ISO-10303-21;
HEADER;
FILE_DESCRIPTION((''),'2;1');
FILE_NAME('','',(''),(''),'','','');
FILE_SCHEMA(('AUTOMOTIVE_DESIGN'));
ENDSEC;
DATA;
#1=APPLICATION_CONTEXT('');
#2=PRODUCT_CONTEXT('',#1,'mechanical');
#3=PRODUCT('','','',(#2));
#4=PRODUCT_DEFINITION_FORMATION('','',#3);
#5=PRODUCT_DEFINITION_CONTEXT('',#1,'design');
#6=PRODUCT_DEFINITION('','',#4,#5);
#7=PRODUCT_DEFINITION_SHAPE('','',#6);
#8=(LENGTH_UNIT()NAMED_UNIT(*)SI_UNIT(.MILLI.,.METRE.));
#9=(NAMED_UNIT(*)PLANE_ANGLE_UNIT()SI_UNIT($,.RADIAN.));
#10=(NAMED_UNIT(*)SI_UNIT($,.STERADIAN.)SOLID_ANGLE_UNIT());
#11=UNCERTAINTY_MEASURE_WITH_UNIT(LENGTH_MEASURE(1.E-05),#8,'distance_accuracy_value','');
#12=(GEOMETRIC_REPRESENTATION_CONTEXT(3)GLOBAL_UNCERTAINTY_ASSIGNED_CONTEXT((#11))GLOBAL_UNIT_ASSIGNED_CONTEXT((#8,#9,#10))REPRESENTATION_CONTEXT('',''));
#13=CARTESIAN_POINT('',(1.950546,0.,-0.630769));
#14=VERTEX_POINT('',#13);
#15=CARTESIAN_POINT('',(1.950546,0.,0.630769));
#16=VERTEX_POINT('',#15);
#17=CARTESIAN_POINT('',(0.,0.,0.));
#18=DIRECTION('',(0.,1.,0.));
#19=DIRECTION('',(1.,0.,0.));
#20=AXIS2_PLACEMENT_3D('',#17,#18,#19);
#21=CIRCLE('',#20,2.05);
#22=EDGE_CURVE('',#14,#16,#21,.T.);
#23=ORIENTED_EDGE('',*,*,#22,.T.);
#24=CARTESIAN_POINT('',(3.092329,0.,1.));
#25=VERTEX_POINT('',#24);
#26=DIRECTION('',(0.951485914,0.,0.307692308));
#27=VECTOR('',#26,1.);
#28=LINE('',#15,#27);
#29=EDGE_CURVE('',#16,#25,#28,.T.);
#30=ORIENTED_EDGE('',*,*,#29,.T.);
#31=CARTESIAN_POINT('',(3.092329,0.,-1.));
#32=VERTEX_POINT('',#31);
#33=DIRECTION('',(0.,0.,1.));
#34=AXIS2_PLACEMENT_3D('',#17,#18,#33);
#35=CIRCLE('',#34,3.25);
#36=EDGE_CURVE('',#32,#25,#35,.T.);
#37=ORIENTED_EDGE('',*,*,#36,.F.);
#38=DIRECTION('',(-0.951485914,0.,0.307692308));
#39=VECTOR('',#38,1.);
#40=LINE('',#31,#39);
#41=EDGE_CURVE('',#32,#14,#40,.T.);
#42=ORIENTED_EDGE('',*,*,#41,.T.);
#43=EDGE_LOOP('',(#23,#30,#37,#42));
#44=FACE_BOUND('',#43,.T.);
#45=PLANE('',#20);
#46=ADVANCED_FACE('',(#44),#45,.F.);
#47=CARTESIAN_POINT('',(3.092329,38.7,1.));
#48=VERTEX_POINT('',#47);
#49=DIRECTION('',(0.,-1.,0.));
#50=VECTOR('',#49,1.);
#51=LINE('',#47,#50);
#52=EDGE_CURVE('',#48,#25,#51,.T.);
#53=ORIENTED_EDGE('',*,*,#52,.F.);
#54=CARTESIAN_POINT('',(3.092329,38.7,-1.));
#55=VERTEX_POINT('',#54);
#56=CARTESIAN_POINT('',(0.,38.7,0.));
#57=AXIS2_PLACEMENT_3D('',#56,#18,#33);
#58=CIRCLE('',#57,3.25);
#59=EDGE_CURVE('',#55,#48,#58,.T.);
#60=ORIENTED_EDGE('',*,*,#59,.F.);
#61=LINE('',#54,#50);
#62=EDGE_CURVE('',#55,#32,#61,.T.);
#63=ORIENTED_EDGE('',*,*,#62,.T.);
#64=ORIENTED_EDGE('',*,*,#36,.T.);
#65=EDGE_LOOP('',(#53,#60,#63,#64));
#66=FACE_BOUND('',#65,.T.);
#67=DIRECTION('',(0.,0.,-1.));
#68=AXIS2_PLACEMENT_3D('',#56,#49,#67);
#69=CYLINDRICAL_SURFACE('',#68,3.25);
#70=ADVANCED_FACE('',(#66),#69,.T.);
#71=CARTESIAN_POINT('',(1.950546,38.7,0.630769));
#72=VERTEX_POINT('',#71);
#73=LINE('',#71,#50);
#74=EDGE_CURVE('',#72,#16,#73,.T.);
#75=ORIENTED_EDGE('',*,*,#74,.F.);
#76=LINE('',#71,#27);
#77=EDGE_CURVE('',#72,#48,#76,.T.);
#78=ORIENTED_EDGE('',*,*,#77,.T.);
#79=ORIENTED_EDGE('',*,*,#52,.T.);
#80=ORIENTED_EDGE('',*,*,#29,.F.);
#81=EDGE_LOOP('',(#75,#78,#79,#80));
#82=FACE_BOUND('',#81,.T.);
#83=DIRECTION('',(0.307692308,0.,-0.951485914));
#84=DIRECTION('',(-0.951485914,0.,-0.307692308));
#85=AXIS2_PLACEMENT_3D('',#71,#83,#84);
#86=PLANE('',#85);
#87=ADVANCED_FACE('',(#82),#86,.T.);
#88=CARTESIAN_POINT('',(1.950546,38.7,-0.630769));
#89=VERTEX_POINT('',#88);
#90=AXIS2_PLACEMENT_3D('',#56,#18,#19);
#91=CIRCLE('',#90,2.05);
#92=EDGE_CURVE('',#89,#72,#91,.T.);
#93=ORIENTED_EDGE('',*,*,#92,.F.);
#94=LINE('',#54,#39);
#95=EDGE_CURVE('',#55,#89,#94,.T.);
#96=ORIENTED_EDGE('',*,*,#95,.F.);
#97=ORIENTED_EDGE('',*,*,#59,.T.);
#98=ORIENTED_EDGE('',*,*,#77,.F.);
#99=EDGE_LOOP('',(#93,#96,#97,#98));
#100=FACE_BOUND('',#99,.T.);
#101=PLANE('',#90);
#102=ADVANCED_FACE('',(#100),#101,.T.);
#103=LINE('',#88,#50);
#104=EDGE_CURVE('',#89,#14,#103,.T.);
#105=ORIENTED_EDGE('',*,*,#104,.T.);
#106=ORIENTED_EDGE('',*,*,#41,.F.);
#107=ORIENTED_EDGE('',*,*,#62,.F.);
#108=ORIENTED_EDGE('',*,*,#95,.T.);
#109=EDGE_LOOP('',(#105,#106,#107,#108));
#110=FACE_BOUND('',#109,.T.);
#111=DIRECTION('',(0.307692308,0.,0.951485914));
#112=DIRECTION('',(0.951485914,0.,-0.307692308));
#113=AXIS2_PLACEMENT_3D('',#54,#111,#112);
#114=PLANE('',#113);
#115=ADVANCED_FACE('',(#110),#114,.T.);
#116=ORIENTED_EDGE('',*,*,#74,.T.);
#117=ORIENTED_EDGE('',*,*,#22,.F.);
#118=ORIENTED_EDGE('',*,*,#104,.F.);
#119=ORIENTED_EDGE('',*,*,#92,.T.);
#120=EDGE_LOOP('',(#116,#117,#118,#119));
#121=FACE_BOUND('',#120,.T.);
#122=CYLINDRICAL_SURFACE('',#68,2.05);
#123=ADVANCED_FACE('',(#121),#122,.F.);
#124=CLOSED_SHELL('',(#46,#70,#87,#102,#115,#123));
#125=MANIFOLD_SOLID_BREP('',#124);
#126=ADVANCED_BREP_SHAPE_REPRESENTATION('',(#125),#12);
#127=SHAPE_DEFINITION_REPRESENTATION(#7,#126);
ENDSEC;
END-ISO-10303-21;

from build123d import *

# Parameters (mm, degrees)
BASE_FLANGE1_DEPTH = 38.7


# Sheet-metal steps are written as plain solids
with BuildPart() as part:
    # Sketch1 → Base-Flange1 (new body)
    with BuildSketch(Plane(origin=(0, 0, 0), x_dir=(1, 0, 0), z_dir=(0, 1, 0))):
        with BuildLine():
            ThreePointArc((3.092329219, 1), (-3.25, 0), (3.092329219, -1))
            Line((3.092329219, -1), (1.950546123, -0.630769231))
            ThreePointArc((1.950546123, -0.630769231), (-2.05, 0), (1.950546123, 0.630769231))
            Line((1.950546123, 0.630769231), (3.092329219, 1))
        make_face()
    extrude(amount=BASE_FLANGE1_DEPTH)


solid = part.part
